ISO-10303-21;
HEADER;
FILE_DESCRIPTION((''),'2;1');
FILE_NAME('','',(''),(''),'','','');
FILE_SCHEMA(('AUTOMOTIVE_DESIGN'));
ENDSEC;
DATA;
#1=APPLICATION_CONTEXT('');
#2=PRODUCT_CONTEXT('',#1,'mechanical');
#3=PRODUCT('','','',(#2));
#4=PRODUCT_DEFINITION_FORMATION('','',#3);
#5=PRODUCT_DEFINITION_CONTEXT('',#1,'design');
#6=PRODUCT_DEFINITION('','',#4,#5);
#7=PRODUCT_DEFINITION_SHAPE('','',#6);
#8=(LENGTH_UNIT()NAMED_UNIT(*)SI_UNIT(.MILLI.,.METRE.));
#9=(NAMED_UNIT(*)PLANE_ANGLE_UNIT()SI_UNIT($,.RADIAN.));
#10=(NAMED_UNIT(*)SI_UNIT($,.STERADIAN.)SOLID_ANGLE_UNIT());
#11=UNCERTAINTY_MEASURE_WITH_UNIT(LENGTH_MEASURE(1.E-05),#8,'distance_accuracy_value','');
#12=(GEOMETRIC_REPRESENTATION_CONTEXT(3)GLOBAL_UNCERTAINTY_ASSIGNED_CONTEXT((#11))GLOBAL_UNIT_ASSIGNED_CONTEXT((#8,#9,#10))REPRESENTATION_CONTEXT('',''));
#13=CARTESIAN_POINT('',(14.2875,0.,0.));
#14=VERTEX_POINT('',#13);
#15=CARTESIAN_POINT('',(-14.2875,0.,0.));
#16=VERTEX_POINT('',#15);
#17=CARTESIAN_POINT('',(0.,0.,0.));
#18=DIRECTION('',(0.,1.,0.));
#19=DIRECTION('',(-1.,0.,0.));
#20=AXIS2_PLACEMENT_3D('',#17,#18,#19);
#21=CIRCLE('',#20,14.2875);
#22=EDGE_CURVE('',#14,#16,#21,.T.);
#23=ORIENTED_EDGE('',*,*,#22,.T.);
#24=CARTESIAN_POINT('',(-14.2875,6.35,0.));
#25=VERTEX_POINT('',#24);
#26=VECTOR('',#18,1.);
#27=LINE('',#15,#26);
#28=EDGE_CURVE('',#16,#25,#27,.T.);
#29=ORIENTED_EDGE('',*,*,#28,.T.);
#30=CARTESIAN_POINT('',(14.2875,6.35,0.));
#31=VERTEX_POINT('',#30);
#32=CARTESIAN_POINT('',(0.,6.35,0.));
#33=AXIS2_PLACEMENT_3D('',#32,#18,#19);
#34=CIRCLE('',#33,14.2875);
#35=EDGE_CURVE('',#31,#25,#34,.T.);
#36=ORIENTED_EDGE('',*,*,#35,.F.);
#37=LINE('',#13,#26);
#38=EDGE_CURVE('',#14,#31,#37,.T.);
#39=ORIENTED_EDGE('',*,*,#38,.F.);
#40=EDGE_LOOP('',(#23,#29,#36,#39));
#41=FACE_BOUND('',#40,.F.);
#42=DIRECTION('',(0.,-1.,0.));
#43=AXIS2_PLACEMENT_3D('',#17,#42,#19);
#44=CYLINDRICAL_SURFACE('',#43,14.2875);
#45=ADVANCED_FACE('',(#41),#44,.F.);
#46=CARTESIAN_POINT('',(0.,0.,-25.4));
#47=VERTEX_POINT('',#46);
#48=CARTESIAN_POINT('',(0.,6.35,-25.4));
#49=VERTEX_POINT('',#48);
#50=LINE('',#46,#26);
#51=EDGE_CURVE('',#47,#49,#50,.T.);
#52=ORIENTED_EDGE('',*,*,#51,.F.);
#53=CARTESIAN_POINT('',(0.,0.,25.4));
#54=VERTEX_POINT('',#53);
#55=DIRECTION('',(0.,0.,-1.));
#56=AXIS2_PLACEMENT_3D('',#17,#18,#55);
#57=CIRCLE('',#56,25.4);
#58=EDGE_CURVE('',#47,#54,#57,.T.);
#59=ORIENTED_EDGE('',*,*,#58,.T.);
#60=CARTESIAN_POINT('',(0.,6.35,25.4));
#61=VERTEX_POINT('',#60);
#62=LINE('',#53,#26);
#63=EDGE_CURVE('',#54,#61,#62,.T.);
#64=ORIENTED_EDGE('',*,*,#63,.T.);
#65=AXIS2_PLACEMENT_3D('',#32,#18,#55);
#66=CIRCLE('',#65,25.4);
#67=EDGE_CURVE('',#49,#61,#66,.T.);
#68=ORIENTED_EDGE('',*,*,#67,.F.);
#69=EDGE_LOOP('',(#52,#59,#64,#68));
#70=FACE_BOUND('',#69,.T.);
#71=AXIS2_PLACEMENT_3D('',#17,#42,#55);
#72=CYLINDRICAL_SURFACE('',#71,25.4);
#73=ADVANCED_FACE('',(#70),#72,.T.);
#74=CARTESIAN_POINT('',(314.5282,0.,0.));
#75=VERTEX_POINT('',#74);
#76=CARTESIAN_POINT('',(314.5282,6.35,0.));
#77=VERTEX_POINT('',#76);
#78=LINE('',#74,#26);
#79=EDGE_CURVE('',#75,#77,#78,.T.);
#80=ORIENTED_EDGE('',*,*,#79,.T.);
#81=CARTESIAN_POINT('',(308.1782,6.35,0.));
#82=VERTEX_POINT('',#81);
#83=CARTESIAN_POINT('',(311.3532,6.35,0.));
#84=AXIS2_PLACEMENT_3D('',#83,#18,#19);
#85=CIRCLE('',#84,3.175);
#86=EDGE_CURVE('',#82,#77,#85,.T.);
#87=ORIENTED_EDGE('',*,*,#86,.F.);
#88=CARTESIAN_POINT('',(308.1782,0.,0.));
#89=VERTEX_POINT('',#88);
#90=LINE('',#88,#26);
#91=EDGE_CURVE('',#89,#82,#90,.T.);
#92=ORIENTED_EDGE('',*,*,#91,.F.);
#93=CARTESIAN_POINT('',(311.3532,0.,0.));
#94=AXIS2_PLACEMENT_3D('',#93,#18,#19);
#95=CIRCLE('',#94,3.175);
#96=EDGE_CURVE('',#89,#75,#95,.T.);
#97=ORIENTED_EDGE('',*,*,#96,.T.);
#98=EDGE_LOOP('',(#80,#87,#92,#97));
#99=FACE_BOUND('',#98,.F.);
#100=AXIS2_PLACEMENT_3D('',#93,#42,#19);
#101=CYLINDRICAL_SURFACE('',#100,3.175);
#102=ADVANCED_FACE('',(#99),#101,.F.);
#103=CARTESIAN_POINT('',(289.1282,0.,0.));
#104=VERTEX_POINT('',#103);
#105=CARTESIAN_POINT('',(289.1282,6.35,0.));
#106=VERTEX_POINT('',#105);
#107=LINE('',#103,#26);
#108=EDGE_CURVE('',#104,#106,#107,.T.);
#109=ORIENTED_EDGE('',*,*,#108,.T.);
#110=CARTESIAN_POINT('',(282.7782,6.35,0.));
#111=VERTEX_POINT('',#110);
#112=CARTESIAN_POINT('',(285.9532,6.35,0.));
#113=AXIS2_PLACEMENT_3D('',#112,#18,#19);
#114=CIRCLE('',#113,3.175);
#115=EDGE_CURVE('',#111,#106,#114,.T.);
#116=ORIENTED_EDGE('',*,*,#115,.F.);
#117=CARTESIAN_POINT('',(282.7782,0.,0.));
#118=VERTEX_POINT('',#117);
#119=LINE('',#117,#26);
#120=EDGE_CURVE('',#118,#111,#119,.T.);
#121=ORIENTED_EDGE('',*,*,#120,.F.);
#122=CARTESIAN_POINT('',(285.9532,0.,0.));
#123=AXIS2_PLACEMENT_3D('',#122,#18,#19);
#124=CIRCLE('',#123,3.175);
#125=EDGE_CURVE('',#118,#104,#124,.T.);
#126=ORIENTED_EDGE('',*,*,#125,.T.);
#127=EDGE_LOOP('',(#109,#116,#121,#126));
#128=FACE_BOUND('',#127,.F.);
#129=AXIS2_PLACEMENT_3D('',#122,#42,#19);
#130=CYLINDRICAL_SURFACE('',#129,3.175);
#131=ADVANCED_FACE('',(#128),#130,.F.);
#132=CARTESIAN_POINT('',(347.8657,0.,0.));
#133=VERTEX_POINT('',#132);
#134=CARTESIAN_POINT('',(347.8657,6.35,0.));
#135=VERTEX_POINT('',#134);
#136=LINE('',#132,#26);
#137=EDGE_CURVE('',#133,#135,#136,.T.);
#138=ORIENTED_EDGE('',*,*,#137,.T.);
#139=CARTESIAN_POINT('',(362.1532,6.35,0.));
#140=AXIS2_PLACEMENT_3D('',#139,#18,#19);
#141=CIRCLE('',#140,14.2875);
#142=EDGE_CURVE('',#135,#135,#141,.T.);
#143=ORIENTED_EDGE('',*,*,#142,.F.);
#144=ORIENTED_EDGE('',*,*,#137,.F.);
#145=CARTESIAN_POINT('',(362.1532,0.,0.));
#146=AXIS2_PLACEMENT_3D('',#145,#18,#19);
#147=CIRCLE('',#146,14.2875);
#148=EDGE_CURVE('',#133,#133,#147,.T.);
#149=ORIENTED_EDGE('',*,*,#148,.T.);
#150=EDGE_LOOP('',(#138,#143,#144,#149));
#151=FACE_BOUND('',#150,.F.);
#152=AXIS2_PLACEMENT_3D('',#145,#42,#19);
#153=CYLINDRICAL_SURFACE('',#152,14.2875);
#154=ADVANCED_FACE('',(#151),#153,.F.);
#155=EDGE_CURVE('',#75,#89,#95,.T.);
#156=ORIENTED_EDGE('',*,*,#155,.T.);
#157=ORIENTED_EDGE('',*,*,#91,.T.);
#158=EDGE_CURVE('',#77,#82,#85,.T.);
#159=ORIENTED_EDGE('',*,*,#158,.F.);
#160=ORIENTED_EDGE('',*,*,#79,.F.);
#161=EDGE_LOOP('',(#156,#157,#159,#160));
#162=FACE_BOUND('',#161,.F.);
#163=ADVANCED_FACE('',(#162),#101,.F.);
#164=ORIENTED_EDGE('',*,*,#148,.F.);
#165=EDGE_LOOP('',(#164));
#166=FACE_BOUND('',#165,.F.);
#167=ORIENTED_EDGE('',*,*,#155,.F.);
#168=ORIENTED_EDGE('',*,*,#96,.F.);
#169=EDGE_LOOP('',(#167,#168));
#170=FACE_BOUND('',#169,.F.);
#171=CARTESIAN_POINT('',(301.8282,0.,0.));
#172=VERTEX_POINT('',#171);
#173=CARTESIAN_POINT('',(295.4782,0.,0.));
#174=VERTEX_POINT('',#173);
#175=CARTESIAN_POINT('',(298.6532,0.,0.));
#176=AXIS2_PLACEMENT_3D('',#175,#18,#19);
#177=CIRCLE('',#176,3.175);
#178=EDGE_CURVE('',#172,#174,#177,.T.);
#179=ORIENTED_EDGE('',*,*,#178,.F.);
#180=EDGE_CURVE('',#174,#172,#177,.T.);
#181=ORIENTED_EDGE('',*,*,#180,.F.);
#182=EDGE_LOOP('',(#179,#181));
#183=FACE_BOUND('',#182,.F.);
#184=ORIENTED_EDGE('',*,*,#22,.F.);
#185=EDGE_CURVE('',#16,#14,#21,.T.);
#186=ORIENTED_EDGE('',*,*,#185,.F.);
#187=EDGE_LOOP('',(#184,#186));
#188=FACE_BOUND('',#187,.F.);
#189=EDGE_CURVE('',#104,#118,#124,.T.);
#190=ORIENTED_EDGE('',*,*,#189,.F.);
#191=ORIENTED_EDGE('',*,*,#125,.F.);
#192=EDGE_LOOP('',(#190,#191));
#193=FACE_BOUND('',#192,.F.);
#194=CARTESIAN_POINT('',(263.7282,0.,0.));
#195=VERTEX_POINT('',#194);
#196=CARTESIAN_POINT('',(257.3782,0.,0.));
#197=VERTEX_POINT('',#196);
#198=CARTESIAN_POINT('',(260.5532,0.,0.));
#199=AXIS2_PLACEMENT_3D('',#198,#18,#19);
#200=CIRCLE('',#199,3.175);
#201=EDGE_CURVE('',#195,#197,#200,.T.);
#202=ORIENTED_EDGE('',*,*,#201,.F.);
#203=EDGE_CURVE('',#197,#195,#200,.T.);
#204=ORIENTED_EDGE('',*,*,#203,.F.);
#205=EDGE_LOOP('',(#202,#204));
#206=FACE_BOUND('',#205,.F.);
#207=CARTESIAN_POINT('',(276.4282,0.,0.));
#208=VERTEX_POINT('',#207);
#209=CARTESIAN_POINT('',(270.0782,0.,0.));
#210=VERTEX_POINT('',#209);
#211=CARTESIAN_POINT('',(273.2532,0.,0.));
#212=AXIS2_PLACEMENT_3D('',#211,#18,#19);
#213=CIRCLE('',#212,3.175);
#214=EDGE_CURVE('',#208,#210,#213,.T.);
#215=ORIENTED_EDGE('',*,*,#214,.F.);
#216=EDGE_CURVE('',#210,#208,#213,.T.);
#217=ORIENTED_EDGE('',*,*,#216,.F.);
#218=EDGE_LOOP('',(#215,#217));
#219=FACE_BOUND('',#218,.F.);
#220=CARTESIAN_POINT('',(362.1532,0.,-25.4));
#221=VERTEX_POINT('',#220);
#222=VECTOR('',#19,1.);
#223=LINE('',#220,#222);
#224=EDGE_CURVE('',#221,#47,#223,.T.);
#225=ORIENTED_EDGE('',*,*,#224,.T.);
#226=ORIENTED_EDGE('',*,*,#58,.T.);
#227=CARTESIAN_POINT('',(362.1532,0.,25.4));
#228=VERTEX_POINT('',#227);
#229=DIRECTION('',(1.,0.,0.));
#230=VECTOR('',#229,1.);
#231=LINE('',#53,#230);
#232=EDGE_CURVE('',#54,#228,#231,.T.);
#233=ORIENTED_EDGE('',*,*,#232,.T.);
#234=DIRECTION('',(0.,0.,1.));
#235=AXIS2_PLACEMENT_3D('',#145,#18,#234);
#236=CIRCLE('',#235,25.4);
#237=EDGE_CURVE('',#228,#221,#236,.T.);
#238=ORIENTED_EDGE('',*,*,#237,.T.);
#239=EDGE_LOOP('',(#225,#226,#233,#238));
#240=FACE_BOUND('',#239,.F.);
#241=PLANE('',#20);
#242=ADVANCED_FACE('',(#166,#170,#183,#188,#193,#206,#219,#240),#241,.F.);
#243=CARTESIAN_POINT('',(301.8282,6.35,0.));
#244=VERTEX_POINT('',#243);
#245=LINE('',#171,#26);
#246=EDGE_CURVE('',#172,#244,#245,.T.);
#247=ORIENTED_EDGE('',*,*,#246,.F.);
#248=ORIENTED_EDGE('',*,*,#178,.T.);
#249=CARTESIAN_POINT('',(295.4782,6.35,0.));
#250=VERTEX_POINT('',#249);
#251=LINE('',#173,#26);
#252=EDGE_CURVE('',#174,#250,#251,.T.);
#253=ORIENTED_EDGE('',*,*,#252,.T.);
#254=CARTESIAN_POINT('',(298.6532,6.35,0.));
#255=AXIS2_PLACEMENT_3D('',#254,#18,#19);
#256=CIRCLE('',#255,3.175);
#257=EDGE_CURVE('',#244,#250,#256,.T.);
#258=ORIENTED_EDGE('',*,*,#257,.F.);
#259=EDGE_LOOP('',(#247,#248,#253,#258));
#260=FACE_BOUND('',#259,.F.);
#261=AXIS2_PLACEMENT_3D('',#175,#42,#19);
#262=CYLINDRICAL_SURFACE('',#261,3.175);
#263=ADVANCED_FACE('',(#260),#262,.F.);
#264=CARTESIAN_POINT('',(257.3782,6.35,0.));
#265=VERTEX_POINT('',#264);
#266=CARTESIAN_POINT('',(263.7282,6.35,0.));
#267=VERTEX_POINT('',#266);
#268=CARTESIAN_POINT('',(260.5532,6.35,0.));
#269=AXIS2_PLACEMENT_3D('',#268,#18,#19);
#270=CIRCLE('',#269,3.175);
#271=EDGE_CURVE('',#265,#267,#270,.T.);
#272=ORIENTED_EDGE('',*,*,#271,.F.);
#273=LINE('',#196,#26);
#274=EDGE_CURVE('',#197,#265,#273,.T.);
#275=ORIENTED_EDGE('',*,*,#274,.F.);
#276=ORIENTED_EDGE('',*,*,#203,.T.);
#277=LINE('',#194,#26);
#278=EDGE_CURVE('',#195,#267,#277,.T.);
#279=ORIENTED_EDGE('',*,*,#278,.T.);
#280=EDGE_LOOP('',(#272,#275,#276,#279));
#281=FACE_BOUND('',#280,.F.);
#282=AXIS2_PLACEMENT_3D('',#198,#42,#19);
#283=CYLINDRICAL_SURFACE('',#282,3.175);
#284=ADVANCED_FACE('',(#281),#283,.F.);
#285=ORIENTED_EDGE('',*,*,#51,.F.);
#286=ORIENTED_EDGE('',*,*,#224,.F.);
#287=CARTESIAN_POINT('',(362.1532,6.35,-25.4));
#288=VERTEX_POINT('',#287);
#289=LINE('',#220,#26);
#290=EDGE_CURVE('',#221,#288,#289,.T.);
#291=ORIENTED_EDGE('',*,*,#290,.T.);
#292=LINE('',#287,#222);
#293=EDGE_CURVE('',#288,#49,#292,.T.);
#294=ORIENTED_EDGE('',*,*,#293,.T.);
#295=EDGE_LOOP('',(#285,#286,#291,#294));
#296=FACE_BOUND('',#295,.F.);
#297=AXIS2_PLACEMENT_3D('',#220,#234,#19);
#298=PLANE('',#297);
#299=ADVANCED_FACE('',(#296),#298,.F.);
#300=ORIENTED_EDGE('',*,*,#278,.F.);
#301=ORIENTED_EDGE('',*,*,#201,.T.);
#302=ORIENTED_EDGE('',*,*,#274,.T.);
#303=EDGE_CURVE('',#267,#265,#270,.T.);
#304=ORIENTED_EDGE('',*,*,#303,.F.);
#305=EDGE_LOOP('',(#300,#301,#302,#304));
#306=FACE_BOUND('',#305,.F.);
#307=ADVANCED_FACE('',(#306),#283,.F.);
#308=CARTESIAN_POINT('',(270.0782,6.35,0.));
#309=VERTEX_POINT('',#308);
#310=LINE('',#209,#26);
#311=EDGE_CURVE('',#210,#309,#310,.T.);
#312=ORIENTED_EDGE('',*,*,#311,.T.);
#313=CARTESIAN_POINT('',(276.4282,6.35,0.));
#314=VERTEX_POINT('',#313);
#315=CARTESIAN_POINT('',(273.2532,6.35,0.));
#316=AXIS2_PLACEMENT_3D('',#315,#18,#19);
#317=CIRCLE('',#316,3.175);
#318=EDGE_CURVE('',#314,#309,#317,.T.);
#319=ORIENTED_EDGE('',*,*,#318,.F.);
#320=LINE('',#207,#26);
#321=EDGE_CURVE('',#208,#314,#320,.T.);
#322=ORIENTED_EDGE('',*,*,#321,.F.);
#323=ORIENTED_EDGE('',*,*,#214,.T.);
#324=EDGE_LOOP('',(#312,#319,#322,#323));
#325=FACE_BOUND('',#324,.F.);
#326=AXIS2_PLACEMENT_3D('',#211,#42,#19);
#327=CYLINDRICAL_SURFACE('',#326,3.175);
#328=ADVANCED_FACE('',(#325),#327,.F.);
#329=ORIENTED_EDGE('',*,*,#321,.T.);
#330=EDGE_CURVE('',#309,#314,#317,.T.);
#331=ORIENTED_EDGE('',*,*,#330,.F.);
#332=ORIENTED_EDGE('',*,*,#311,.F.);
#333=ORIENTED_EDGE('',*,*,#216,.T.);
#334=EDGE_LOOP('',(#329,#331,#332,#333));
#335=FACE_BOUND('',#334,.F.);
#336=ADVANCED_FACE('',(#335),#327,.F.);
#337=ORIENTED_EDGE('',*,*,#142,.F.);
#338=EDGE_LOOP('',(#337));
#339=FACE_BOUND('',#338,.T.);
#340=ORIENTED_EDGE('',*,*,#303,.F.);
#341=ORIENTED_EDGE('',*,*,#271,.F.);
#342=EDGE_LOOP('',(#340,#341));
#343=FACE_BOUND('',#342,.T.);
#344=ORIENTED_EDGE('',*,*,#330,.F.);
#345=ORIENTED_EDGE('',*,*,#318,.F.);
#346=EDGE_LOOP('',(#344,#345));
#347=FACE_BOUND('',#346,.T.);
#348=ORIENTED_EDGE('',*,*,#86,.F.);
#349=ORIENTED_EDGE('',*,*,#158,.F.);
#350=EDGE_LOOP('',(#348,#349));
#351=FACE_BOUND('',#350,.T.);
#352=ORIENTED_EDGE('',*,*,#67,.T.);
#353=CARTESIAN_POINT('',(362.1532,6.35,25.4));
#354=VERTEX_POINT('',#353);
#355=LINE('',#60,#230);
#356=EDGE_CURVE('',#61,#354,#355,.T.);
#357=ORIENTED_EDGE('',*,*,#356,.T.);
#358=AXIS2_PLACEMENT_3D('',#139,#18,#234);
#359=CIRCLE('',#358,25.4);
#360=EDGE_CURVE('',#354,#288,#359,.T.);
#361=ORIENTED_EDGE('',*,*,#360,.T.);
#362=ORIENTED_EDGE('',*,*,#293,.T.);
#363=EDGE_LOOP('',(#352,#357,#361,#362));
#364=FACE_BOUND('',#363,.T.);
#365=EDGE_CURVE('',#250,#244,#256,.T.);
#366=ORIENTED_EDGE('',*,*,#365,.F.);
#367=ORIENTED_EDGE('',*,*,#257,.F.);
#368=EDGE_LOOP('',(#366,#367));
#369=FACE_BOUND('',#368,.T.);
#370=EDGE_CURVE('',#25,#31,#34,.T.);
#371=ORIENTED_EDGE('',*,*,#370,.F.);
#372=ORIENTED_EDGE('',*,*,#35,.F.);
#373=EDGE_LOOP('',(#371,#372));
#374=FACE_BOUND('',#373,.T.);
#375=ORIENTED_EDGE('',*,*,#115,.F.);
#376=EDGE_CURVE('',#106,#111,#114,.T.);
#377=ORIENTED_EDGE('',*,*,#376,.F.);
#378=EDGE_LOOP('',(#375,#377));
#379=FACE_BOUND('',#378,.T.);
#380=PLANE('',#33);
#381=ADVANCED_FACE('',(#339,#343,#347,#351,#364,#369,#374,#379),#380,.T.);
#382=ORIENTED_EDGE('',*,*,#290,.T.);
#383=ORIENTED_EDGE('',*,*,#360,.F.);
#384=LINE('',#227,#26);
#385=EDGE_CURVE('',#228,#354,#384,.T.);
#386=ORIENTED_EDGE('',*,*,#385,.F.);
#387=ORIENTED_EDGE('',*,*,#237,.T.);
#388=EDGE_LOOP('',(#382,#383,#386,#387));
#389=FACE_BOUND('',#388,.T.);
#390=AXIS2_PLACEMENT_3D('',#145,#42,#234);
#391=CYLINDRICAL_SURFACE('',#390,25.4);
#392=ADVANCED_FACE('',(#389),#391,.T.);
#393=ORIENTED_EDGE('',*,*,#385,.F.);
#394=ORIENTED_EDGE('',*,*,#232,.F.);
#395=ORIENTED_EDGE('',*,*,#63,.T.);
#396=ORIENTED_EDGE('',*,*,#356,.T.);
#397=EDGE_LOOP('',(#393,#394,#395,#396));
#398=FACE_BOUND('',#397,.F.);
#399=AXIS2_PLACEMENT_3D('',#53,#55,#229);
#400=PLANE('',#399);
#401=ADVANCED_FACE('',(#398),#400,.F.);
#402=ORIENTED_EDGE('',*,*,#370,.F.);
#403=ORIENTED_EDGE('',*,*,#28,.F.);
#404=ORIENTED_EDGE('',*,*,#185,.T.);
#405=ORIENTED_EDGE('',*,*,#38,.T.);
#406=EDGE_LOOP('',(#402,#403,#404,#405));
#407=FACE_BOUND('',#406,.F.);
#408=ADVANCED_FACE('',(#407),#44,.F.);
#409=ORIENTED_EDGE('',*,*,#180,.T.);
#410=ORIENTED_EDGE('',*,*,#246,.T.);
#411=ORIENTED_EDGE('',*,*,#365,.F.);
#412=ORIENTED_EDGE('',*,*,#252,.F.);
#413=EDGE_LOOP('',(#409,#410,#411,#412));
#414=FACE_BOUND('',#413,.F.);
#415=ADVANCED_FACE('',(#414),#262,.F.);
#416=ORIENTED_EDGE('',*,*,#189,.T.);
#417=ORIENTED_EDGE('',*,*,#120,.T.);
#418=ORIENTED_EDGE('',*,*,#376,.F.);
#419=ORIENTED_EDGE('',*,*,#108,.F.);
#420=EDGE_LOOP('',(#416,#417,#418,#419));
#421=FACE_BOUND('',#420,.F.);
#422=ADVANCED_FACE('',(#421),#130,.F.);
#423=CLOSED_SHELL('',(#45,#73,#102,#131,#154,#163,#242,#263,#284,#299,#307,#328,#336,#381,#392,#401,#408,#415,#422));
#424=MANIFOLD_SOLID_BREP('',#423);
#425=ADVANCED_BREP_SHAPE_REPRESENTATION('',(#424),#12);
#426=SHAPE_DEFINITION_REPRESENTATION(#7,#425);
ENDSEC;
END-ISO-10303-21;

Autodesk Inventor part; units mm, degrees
ref_plane "YZ Plane" through (0, 0, 0) normal (1, 0, 0) x (0, 1, 0)
ref_plane "XZ Plane" through (0, 0, 0) normal (0, 1, 0) x (-1, 0, 0)
ref_plane "XY Plane" through (0, 0, 0) normal (0, 0, 1) x (1, 0, 0)
sketch "Sketch1" plane through (0, 0, 0) normal (0, 1, 0) x (-1, 0, 0)
  line L0 (0, 0) -> (-362.1532, 0)
  line L1 (0, 0) -> (-362.1532, 0) construction
  line L2 (0, 0) -> (-362.1532, 0) construction
  line L3 (0, 25.4) -> (-362.1532, 25.4)
  line L4 (-362.1532, -25.4) -> (0, -25.4)
  arc A0 (0, -25.4) -> (0, 25.4) centre (0, 0) ccw
  arc A1 (-362.1532, 25.4) -> (-362.1532, -25.4) centre (-362.1532, 0) ccw
  circle A2 centre (0, 0) radius 14.2875
  circle A3 centre (-362.1532, 0) radius 14.2875
  circle A4 centre (-311.3532, 0) radius 3.175
  circle A5 centre (-298.6532, 0) radius 3.175
  circle A6 centre (-285.9532, 0) radius 3.175
  circle A7 centre (-273.2532, 0) radius 3.175
  circle A8 centre (-260.5532, 0) radius 3.175
  point P0 (-181.0766, 0)
  point P1 (-181.0766, 0)
  dimension "d0" = 362.1532
  dimension "d8" = 50.8
  dimension "d9" = 28.575
  dimension "d10" = 28.575
  dimension "d11" = 6.35
  dimension "d12" = 50.8
  dimension "d13" = 6.35
  dimension "d14" = 6.35
  dimension "d15" = 6.35
  dimension "d16" = 6.35
  dimension "d17" = 12.7
  dimension "d18" = 12.7
  dimension "d19" = 12.7
  dimension "d20" = 12.7
extrude "Extrusion1" add sketch "Sketch1" along normal blind 6.35
properties part number "4-bar intake (14.258) bar"
